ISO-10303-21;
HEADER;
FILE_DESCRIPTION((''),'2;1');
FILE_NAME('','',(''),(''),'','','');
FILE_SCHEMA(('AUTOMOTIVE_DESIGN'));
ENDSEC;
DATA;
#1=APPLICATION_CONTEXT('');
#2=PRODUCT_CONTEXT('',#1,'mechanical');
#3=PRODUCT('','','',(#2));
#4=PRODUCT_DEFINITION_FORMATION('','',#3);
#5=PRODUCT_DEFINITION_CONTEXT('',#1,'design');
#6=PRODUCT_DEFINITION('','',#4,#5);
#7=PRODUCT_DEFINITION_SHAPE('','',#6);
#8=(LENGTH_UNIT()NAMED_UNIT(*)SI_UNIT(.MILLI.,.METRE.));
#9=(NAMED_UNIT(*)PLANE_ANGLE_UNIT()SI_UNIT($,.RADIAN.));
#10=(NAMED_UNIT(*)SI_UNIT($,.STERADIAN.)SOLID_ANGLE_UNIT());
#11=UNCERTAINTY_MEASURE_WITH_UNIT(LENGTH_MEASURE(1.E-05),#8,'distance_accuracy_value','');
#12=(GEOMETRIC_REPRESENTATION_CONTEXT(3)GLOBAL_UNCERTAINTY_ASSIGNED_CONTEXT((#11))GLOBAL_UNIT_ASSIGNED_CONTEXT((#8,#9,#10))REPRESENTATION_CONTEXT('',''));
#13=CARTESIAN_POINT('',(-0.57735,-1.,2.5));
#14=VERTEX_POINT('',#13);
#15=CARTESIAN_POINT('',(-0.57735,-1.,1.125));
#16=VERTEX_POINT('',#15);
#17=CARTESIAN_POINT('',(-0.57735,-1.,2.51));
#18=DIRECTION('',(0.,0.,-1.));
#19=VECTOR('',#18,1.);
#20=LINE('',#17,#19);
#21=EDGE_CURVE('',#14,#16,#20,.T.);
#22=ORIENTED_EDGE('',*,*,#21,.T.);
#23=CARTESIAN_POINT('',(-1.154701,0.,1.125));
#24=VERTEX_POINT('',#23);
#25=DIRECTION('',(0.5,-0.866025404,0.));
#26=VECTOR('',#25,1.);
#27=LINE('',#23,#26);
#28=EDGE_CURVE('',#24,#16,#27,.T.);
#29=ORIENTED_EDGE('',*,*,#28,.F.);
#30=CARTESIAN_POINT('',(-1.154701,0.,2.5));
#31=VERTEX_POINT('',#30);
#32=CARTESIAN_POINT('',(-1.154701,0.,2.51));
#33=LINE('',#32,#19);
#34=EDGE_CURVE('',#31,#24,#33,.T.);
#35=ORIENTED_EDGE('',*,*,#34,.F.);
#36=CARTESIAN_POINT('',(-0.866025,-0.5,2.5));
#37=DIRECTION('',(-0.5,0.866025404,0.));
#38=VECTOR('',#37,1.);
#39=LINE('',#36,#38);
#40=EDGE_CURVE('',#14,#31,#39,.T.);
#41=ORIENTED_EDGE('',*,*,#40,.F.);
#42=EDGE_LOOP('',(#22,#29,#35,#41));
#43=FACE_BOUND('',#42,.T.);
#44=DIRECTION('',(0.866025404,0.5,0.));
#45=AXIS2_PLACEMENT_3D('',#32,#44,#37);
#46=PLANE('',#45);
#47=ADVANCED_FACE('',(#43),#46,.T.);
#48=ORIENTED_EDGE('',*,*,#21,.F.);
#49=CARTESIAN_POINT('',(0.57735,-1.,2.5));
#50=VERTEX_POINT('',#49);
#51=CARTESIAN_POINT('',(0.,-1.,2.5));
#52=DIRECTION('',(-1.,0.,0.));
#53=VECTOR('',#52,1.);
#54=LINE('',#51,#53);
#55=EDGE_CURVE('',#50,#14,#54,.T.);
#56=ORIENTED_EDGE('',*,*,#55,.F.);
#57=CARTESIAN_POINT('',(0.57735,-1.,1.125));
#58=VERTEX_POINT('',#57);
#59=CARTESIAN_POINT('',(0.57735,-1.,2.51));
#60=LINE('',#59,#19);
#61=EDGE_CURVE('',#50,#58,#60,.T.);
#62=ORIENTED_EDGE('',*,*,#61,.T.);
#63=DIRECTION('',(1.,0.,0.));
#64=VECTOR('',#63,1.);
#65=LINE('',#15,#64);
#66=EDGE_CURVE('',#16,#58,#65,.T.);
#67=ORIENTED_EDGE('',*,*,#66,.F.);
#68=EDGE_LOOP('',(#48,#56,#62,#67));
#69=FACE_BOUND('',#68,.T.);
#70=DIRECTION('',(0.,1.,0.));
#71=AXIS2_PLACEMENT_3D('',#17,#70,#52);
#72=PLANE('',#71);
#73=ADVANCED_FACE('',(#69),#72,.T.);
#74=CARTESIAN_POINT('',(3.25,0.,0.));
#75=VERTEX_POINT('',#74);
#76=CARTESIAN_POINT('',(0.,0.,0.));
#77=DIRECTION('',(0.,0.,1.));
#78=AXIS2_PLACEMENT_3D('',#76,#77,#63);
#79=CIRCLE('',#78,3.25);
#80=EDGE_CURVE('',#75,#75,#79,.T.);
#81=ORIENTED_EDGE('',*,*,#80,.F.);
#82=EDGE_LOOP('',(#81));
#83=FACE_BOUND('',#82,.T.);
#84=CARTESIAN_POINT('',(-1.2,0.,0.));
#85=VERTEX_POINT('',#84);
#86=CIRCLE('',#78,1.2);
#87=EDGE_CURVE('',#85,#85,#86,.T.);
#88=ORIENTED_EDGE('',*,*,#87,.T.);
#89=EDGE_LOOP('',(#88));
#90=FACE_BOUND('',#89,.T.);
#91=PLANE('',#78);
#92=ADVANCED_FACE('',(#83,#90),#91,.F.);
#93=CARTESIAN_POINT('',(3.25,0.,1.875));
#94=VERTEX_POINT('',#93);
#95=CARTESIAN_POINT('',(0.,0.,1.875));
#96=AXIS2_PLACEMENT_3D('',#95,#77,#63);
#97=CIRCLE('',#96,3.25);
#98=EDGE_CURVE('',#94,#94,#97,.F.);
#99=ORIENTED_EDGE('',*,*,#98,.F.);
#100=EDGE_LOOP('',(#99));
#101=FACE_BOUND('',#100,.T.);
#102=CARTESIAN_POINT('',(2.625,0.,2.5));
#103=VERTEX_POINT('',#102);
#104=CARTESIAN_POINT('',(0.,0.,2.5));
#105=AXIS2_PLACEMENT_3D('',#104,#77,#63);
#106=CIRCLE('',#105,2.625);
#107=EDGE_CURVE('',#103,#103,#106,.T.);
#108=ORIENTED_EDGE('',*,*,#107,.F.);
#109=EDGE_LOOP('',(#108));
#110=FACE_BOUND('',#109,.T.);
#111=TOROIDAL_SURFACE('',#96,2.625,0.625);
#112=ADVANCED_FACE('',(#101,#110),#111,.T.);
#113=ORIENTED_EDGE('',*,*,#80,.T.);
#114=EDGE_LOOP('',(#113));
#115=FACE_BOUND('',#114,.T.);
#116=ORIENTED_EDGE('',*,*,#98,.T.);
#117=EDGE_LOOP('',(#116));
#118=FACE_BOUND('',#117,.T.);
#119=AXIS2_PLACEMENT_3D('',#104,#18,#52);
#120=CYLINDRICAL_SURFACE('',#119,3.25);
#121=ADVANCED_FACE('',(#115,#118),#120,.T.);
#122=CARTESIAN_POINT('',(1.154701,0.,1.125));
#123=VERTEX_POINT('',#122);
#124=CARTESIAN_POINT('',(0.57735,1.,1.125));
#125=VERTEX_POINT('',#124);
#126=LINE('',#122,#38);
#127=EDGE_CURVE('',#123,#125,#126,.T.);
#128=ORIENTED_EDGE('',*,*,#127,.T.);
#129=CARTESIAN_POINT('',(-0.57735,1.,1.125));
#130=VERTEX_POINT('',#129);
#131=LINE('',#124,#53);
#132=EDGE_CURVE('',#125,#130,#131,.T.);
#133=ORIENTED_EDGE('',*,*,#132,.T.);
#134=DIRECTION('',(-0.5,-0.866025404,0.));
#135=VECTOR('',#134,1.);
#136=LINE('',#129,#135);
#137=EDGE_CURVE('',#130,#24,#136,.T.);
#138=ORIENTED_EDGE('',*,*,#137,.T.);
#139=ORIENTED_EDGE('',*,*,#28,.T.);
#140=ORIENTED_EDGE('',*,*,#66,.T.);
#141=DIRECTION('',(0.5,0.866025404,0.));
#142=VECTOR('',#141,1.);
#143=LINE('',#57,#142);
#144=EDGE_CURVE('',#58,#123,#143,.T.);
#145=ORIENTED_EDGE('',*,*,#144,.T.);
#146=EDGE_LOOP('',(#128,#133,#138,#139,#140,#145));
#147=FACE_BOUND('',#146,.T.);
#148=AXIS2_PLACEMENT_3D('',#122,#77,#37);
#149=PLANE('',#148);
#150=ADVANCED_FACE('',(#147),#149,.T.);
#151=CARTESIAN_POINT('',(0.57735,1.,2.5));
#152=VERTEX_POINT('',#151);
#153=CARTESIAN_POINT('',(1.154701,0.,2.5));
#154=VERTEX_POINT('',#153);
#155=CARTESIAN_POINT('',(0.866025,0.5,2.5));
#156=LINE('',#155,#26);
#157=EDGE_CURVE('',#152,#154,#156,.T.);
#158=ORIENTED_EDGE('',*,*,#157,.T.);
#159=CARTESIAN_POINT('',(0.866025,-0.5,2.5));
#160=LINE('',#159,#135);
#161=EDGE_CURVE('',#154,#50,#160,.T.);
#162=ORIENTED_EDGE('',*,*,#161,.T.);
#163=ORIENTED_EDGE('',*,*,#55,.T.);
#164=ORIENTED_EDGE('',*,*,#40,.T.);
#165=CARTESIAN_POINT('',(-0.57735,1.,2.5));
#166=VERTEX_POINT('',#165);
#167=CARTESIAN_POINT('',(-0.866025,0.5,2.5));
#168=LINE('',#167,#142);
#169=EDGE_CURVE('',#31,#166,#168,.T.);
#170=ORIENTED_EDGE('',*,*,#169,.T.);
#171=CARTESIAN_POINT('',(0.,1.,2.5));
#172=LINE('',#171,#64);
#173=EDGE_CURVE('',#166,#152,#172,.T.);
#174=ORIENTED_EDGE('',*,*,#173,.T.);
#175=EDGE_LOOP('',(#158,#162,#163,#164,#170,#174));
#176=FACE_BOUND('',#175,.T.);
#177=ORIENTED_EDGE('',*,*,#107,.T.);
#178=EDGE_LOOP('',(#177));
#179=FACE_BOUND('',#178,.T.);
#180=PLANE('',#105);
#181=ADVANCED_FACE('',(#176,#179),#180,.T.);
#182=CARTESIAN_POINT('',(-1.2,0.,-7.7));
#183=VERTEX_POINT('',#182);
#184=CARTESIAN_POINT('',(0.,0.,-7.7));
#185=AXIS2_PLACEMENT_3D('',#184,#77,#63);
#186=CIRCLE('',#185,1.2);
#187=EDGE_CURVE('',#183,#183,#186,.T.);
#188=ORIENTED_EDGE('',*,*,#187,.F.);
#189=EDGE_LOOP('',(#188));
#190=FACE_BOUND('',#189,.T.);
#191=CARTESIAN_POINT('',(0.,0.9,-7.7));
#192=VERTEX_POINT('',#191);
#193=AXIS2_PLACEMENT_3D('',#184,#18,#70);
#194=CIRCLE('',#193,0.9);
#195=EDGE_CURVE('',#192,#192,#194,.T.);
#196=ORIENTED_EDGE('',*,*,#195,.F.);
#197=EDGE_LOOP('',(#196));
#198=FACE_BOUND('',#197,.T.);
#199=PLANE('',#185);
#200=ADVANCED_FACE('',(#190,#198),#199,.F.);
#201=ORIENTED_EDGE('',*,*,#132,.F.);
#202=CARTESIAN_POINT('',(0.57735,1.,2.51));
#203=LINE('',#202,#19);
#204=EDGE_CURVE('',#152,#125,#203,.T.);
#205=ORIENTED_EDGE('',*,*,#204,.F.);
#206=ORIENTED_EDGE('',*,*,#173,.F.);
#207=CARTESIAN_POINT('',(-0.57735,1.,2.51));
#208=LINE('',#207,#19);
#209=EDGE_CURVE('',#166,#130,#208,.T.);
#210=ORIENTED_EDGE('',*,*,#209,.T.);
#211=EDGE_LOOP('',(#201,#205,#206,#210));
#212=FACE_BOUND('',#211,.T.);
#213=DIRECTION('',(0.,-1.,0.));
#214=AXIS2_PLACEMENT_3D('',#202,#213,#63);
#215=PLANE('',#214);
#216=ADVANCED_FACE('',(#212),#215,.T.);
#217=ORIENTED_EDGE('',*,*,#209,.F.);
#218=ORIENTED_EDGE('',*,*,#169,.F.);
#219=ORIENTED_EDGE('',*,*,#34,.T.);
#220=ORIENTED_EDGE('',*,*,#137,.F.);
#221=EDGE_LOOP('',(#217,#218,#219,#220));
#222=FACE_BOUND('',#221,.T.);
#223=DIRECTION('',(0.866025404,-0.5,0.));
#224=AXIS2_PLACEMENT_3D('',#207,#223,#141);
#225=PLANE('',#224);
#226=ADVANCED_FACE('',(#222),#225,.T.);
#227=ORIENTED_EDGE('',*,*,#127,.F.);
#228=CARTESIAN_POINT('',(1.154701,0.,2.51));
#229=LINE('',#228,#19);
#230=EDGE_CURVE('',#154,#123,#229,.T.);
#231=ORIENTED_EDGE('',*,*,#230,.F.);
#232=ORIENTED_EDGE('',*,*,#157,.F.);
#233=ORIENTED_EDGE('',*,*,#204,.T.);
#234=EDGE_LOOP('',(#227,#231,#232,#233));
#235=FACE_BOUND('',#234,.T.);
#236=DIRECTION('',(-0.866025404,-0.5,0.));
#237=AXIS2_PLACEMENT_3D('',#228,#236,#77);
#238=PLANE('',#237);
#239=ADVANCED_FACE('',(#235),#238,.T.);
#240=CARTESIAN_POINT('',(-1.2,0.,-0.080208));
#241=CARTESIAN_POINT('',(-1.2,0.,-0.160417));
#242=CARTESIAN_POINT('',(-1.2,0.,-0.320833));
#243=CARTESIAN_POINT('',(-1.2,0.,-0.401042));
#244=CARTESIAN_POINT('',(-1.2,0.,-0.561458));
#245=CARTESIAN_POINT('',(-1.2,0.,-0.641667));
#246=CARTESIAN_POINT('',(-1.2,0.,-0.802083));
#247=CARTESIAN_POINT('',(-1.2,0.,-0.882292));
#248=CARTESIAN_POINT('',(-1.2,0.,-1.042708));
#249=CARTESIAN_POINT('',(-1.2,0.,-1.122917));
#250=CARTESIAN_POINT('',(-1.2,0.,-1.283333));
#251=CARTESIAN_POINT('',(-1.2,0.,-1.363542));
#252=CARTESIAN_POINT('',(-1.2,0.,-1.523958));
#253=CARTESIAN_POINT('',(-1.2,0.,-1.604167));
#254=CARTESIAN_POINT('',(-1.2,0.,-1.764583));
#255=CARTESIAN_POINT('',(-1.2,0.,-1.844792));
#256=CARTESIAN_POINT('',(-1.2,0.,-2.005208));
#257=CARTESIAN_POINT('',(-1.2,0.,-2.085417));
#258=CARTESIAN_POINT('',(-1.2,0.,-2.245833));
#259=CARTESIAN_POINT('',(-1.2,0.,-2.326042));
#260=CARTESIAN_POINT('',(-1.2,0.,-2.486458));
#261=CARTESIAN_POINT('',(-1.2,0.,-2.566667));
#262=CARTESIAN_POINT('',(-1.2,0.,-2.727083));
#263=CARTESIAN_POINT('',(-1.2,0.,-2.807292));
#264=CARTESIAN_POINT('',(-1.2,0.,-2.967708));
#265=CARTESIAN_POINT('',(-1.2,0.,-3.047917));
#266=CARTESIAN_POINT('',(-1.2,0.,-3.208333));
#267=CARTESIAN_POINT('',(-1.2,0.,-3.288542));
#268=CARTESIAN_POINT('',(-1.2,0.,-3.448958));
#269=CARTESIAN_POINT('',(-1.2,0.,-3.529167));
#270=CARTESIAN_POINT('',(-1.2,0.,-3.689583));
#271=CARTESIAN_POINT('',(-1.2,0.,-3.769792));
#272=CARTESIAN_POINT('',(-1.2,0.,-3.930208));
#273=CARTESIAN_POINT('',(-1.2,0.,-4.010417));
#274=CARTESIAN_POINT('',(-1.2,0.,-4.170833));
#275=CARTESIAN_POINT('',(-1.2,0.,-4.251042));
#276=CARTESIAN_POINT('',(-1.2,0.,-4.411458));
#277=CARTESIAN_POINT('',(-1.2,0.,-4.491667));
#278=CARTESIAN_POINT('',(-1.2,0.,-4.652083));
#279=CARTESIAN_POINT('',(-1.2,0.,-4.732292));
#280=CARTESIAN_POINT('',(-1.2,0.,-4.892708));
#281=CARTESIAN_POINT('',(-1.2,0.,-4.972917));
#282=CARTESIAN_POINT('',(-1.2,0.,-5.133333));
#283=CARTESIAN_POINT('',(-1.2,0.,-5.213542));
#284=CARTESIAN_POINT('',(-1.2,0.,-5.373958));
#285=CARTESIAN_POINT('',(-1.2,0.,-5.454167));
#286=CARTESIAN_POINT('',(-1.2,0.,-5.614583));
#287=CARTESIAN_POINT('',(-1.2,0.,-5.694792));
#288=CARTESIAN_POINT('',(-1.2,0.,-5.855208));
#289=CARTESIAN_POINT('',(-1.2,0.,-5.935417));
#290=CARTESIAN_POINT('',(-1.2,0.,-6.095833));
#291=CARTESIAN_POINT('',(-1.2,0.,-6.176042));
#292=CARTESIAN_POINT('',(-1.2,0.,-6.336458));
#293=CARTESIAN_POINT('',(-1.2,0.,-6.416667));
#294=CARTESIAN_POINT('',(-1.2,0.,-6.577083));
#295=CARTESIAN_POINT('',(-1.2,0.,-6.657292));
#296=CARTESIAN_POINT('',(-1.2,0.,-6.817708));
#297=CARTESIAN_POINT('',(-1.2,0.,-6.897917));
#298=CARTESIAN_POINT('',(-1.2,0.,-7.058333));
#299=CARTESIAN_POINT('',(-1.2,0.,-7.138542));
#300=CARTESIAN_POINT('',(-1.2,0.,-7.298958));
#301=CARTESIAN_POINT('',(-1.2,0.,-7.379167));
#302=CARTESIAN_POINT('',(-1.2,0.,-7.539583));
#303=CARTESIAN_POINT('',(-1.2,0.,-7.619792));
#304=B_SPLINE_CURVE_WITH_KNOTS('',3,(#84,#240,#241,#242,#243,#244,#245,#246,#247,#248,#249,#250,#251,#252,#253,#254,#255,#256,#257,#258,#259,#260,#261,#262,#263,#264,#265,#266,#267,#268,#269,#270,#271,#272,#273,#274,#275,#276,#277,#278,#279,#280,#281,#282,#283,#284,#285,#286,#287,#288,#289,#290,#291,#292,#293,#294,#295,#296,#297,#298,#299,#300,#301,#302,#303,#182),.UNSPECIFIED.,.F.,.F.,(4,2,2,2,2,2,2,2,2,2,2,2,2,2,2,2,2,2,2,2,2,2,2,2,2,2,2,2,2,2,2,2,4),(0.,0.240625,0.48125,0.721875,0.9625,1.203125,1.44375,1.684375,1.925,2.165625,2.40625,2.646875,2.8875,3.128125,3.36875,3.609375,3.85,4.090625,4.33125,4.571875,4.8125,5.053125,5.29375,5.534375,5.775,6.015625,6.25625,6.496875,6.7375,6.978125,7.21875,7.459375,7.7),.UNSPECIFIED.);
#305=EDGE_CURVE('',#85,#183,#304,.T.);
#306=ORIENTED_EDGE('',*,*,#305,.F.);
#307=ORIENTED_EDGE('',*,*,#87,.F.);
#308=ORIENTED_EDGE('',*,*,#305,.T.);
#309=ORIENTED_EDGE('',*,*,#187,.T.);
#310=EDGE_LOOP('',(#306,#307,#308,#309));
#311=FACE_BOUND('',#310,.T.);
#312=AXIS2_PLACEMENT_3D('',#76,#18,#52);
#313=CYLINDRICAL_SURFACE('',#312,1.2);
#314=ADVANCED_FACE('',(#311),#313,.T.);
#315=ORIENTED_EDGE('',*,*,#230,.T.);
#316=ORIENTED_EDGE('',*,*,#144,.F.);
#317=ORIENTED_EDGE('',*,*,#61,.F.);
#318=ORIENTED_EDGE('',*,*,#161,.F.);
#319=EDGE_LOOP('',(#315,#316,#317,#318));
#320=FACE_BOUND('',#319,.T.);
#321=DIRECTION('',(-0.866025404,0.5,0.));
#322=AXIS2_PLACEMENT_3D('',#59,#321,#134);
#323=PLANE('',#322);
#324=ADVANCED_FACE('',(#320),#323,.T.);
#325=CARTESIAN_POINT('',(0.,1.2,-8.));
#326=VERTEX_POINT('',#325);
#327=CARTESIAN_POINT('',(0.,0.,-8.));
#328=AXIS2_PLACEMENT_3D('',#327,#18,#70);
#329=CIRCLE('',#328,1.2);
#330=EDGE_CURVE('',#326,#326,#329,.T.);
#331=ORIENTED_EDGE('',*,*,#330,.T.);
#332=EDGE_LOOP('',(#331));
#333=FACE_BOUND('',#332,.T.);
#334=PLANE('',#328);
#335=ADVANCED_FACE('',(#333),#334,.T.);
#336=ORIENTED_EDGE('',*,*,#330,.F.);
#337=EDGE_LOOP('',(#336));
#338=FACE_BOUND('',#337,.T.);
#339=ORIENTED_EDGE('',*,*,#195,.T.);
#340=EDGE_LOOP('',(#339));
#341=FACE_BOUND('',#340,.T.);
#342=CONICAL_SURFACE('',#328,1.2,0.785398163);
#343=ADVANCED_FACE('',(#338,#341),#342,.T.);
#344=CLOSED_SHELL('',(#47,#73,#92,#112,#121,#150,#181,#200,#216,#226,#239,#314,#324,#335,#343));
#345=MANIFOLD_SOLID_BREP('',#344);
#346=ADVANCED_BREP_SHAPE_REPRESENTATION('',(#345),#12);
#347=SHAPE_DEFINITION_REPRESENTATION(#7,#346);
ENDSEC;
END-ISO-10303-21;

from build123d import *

# Parameters (mm, degrees)
F_0000_CYLINDER_SKETCH_R    = 3.25
F_0000_CYLINDER_DEPTH       = 2.5
F_0001_FILLET_R             = 0.625
F_0002_EXTRUDE_DEPTH        = 1.385
F_0002_EXTRUDE_ROTATE_ANGLE = 120
F_0005_CYLINDER_SKETCH_R    = 1.2
F_0005_CYLINDER_DEPTH       = 7.7
F_0006_CONE_ROTATE_ANGLE    = 90


with BuildPart() as part:
    # 0000_cylinder_Sketch → 0000_cylinder (new body)
    with BuildSketch(Plane.XY):
        Circle(F_0000_CYLINDER_SKETCH_R)
    extrude(amount=F_0000_CYLINDER_DEPTH)

    # 0001_fillet
    f_0001_fillet_edges = [part.edges().sort_by_distance(p)[0] for p in [
        (-3.25, 0, 2.5),
    ]]
    fillet(f_0001_fillet_edges, radius=F_0001_FILLET_R)


with BuildPart() as body_2:
    # 0002_extrude_Sketch → 0002_extrude (new body)
    with BuildSketch(Plane.XY):
        Polygon((0, 0), (1.154700538, 0), (1.732050808, 1), (1.154700538, 2), (0, 2), (-0.577350269, 1), align=None)
    extrude(amount=F_0002_EXTRUDE_DEPTH)


with BuildPart() as body_2_1:
    # 0002_extrude_Rotate: read off the stored shape, not the designer's step
    # 0002_extrude_Rotate: moved
    add(body_2.part.rotate(Axis((0, 0, 0), (0, 0, 1)), F_0002_EXTRUDE_ROTATE_ANGLE))


with BuildPart() as body_2_2:
    # 0002_extrude_Translate: moved
    add(body_2_1.part.moved(Location((1.154700538, 0, 1.125))))


with BuildPart() as part_1:
    add(part.part)

    # 0004_sub: cut body 2
    add(body_2_2.part, mode=Mode.SUBTRACT)


with BuildPart() as body_2_2_1:
    # 0005_cylinder_Sketch → 0005_cylinder (new body)
    with BuildSketch(Plane.XY):
        with Locations(Location((0, 0, 0), (0, 0, 180))):
            Circle(F_0005_CYLINDER_SKETCH_R)
    extrude(amount=F_0005_CYLINDER_DEPTH)


with BuildPart() as body_2_2_2:
    # 0005_cylinder_Translate: moved
    add(body_2_2_1.part.moved(Location((0, 0, -7.7))))


with BuildPart() as body_3:
    # 0006_cone_Sketch → 0006_cone (revolve)
    with BuildSketch(Plane.XY, mode=Mode.PRIVATE) as f_0006_cone_sk:
        Polygon((0, 0), (1.2, 0), (0.9, 0.3), (0, 0.3), align=None)
    revolve(f_0006_cone_sk.sketch.rotate(Axis((0, -100, 0), (0, 1, 0)), 90), axis=Axis((0, -100, 0), (0, 1, 0)))


with BuildPart() as body_3_1:
    # 0006_cone_Rotate: moved
    add(body_3.part.rotate(Axis((0, 0, 0), (1, 0, 0)), F_0006_CONE_ROTATE_ANGLE))


with BuildPart() as body_3_2:
    # 0006_cone_Translate: moved
    add(body_3_1.part.moved(Location((0, 0, -8))))


with BuildPart() as body_2_2_3:
    add(body_2_2_2.part)

    # 0008_add: union body 3
    add(body_3_2.part)


with BuildPart() as part_2:
    add(part_1.part)

    # 0009_add: union body 2 2
    add(body_2_2_3.part)


solid = part_2.part
